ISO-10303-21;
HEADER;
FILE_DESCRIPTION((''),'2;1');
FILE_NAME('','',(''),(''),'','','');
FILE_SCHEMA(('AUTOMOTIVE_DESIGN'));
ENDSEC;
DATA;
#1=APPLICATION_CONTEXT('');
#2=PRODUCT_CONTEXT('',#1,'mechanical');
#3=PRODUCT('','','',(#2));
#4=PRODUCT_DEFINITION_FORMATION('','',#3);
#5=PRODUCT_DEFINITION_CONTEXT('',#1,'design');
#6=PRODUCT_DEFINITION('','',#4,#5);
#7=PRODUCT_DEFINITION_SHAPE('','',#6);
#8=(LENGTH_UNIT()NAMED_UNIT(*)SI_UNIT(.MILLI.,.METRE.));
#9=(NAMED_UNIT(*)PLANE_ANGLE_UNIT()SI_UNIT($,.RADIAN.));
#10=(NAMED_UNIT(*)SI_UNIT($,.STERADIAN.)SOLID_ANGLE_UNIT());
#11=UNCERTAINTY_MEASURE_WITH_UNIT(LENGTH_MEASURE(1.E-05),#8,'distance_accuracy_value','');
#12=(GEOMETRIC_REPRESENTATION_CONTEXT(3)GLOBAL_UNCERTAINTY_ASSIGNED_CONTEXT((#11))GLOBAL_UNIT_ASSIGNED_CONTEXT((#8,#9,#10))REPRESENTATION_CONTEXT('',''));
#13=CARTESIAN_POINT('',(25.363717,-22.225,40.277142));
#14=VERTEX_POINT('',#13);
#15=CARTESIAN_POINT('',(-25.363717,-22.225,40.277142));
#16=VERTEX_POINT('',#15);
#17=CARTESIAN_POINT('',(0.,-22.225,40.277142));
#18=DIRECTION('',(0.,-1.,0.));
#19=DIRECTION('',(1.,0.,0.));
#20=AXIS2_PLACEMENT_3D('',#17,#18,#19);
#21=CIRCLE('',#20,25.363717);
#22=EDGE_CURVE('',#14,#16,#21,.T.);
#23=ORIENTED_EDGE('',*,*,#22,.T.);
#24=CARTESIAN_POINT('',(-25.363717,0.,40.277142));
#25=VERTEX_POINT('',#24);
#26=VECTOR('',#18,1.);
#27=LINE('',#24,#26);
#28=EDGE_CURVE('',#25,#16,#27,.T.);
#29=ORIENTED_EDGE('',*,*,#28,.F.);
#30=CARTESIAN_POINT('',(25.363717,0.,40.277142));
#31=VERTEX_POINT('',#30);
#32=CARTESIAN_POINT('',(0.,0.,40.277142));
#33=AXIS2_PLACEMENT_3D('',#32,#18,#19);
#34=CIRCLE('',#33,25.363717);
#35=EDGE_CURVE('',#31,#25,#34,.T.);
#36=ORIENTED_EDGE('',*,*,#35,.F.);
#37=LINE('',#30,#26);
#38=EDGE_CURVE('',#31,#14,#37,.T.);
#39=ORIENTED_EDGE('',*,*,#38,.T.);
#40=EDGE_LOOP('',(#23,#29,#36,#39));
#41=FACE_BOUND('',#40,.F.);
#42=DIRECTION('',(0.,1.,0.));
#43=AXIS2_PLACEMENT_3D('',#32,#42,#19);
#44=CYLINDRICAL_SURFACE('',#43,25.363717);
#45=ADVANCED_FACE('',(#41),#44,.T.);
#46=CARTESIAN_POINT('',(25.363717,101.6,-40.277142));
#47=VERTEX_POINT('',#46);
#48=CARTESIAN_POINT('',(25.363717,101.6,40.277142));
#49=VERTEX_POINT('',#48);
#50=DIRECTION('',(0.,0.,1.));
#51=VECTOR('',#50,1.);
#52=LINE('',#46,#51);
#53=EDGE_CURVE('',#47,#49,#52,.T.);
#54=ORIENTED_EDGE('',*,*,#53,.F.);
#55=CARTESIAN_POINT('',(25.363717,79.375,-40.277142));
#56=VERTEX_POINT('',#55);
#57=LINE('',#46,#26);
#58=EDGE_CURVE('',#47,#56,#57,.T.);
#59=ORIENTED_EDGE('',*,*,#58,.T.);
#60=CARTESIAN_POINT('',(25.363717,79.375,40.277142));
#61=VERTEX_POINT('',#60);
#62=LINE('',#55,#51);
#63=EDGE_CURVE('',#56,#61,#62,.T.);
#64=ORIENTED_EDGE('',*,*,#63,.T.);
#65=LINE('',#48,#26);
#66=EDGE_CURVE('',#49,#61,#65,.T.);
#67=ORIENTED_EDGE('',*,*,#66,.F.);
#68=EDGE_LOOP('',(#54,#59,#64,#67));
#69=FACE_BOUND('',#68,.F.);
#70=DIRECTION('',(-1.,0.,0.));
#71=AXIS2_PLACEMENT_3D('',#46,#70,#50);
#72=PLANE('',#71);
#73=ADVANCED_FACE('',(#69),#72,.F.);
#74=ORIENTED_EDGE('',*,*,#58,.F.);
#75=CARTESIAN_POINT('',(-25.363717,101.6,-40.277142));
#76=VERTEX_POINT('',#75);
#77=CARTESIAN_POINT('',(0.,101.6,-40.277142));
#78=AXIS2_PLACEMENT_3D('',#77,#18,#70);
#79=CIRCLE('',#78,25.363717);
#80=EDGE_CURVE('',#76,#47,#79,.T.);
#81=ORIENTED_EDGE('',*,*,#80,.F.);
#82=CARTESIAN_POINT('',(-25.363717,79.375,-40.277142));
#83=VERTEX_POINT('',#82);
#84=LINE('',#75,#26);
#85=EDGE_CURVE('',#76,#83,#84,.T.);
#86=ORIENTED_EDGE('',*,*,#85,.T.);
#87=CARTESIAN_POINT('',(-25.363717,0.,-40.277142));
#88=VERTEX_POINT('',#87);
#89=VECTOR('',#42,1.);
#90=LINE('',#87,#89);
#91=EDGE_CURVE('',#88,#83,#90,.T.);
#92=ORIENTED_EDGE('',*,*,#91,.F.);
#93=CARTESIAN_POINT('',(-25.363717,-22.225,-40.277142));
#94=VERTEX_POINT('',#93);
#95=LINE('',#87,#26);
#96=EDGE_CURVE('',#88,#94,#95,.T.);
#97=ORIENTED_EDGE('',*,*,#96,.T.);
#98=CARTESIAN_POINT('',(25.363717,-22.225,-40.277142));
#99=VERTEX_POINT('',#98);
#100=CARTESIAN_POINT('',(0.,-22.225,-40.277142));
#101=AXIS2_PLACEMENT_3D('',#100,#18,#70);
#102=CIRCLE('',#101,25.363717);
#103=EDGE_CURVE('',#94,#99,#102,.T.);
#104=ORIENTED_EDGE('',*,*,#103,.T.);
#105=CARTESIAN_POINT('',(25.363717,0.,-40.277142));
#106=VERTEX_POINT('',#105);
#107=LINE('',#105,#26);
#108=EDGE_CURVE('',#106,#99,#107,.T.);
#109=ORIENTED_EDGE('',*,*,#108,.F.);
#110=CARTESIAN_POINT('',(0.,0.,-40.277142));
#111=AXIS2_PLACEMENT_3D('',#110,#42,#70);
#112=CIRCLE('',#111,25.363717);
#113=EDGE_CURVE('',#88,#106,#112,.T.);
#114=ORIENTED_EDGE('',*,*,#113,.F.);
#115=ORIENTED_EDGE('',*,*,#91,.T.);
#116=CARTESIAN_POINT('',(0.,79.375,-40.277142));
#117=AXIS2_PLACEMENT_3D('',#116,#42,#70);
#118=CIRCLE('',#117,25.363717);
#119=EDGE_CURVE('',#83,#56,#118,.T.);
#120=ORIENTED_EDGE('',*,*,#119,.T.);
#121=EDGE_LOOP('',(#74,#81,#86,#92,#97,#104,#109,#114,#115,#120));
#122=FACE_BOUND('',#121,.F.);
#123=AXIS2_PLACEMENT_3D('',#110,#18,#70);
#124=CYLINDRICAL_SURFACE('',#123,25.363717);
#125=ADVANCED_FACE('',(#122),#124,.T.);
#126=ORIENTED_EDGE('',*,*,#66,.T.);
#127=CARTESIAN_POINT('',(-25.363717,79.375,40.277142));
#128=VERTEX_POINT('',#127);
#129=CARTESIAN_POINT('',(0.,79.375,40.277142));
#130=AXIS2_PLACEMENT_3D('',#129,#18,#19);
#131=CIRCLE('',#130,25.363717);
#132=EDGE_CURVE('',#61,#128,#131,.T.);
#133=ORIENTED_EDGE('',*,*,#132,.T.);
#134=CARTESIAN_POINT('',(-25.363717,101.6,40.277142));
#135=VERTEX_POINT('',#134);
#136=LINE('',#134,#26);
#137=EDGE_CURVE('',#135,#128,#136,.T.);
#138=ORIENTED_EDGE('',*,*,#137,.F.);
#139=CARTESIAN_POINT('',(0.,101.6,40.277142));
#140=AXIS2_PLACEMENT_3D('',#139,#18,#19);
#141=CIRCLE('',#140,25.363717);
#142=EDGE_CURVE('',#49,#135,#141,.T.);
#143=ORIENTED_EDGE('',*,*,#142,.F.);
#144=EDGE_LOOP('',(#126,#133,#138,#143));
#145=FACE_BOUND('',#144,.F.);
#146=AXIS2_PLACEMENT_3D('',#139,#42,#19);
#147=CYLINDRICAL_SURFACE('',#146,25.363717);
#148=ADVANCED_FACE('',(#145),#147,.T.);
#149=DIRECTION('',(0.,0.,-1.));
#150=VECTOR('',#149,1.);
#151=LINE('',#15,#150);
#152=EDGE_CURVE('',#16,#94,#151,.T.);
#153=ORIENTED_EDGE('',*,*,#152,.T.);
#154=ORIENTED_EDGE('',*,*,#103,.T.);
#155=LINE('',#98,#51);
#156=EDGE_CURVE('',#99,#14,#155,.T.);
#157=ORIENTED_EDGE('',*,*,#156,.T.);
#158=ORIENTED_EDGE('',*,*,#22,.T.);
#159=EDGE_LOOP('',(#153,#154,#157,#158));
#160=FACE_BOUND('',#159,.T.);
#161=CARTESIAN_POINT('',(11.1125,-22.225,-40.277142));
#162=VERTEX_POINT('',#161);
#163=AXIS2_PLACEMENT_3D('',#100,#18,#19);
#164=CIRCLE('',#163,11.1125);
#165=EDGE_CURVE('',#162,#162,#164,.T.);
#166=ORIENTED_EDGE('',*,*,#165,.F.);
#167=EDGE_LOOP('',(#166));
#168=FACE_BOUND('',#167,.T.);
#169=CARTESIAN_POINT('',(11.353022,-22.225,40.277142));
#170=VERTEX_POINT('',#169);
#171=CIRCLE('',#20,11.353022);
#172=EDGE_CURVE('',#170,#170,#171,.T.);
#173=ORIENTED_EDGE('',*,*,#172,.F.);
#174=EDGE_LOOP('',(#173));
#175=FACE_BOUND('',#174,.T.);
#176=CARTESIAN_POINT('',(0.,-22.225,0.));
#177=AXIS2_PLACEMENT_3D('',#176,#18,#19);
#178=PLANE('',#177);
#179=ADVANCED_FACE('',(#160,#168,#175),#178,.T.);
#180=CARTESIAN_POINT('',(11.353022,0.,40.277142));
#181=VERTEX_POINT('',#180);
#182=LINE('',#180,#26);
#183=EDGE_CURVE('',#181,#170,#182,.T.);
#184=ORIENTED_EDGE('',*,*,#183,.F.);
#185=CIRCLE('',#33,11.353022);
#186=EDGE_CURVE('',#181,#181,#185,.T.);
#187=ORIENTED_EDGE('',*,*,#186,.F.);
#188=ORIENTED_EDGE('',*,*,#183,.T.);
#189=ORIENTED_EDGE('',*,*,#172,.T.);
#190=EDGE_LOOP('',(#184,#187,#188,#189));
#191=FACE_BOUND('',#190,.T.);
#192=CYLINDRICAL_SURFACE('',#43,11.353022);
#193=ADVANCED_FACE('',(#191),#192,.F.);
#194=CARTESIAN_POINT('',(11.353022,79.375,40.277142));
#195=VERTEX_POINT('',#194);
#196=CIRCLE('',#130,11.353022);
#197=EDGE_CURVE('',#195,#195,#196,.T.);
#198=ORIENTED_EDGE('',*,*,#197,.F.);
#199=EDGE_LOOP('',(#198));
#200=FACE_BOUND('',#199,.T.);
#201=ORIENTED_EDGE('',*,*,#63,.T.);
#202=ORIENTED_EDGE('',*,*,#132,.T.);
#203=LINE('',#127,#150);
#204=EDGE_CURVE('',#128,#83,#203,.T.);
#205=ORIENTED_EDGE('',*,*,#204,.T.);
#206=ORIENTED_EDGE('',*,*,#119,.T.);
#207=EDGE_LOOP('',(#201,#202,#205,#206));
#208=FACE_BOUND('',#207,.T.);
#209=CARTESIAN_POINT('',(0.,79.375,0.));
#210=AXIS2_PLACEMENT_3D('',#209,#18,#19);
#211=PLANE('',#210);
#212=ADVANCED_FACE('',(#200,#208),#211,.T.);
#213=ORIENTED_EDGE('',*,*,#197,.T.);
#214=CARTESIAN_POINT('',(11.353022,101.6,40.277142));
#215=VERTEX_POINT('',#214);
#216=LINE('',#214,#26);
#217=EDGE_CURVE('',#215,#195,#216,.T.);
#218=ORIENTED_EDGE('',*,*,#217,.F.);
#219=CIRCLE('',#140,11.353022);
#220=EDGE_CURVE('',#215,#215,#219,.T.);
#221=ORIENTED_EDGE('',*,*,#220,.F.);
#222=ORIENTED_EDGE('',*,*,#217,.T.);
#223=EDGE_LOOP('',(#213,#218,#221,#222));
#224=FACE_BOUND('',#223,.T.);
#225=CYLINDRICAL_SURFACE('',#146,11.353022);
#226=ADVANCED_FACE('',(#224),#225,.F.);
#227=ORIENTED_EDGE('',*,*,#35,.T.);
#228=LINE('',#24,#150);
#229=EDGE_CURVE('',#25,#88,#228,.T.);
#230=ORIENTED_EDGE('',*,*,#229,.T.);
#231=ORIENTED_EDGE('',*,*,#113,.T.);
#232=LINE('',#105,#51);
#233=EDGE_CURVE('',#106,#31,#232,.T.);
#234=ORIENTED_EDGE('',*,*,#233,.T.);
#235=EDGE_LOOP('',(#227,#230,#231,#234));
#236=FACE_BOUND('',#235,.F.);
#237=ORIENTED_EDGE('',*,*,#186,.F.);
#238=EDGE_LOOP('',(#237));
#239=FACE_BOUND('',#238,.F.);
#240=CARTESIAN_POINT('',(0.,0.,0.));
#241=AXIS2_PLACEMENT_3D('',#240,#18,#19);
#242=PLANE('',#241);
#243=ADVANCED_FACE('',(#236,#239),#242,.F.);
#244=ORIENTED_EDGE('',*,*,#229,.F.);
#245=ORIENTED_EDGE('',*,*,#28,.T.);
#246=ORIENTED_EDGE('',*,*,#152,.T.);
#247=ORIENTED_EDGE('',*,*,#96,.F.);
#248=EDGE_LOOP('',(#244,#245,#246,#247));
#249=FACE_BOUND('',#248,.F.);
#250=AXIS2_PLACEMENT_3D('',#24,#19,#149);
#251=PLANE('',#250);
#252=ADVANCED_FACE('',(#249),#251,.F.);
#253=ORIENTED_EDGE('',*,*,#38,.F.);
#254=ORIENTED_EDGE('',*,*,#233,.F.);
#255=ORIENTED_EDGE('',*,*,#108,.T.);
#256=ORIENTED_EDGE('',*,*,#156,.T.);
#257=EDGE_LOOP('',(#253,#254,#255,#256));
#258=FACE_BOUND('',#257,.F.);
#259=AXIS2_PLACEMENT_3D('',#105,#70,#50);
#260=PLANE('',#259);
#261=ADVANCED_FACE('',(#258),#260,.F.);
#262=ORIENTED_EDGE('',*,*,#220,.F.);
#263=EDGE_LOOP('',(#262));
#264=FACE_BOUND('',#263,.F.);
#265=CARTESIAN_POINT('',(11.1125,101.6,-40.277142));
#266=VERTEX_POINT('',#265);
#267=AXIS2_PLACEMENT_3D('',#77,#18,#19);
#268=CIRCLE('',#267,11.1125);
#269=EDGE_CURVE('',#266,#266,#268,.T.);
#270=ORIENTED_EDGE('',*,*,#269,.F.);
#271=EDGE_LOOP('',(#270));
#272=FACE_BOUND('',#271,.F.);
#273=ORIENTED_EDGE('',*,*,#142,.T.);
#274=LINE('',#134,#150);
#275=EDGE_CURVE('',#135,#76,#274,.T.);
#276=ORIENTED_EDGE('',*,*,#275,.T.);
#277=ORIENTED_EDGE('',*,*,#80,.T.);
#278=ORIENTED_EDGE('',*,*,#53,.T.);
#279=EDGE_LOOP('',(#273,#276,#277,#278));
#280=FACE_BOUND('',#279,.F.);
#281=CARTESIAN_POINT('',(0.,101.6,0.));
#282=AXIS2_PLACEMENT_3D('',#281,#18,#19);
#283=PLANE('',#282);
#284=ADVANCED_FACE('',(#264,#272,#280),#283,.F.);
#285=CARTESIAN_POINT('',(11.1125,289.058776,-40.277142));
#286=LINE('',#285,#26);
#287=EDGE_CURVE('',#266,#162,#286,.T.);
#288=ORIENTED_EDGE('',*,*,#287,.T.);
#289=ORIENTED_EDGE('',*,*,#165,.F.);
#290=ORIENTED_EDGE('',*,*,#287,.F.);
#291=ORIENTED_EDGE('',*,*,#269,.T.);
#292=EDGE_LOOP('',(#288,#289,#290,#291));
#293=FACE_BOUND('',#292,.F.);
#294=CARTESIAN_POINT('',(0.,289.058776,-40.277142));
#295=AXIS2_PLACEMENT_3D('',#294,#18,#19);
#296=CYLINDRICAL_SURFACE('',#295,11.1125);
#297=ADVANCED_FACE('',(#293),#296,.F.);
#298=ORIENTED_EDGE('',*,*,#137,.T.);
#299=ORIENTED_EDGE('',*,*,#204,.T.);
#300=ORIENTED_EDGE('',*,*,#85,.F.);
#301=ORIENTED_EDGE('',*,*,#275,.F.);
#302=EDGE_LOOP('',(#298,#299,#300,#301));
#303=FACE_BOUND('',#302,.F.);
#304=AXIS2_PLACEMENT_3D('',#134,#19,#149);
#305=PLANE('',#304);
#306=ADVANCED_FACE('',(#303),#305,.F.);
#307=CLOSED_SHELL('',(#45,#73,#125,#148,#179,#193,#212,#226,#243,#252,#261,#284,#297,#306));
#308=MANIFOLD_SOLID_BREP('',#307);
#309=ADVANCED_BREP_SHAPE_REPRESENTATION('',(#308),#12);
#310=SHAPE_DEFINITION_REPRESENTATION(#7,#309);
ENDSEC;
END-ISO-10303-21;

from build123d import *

# Parameters (mm, degrees)
F0_R     = 11.3530222264
F1_DEPTH = 22.225
F4_DEPTH = 79.375
F6_D     = 22.225


with BuildPart() as f1:
    # F0 (on Front) → F1 (new body)
    with BuildSketch(Plane.XZ):
        with BuildLine():
            Line((25.3637172282, -40.2771420777), (25.3637172282, 40.2771420777))
            ThreePointArc((25.3637172282, 40.2771420777), (0, 65.6408593059), (-25.3637172282, 40.2771420777))
            Line((-25.3637172282, 40.2771420777), (-25.3637172282, -40.2771420777))
            ThreePointArc((-25.3637172282, -40.2771420777), (0, -65.6408593059), (25.3637172282, -40.2771420777))
        make_face()
        with Locations((0, 40.2771420777)):
            Circle(F0_R, mode=Mode.SUBTRACT)
    extrude(amount=F1_DEPTH)


with BuildPart() as f2_1:
    # F2: copy of F1
    add(f1.part.moved(Location((0, 101.6, 0))))


with BuildPart() as f1_1:
    add(f1.part)

    add(f2_1.part)  # F4 merges F2_1
    # F3 (on face) → F4 (join, through all)
    with BuildSketch(Plane(origin=(0, 0, 0), x_dir=(-1, 0, 0), z_dir=(0, 1, 0))):
        with BuildLine():
            ThreePointArc((-25.3637172282, -40.2771420777), (0, -65.6408593059), (25.3637172282, -40.2771420777))
            ThreePointArc((25.3637172282, -40.2771420777), (0, -14.9134248495), (-25.3637172282, -40.2771420777))
        make_face()
    extrude(amount=F4_DEPTH)

    # F6 (through all)
    with Locations(Plane(origin=(0, 101.6, 0), x_dir=(-1, 0, 0), z_dir=(0, 1, 0))):
        with Locations((0, -40.2771420777)):
            Hole(F6_D / 2)


solid = f1_1.part
